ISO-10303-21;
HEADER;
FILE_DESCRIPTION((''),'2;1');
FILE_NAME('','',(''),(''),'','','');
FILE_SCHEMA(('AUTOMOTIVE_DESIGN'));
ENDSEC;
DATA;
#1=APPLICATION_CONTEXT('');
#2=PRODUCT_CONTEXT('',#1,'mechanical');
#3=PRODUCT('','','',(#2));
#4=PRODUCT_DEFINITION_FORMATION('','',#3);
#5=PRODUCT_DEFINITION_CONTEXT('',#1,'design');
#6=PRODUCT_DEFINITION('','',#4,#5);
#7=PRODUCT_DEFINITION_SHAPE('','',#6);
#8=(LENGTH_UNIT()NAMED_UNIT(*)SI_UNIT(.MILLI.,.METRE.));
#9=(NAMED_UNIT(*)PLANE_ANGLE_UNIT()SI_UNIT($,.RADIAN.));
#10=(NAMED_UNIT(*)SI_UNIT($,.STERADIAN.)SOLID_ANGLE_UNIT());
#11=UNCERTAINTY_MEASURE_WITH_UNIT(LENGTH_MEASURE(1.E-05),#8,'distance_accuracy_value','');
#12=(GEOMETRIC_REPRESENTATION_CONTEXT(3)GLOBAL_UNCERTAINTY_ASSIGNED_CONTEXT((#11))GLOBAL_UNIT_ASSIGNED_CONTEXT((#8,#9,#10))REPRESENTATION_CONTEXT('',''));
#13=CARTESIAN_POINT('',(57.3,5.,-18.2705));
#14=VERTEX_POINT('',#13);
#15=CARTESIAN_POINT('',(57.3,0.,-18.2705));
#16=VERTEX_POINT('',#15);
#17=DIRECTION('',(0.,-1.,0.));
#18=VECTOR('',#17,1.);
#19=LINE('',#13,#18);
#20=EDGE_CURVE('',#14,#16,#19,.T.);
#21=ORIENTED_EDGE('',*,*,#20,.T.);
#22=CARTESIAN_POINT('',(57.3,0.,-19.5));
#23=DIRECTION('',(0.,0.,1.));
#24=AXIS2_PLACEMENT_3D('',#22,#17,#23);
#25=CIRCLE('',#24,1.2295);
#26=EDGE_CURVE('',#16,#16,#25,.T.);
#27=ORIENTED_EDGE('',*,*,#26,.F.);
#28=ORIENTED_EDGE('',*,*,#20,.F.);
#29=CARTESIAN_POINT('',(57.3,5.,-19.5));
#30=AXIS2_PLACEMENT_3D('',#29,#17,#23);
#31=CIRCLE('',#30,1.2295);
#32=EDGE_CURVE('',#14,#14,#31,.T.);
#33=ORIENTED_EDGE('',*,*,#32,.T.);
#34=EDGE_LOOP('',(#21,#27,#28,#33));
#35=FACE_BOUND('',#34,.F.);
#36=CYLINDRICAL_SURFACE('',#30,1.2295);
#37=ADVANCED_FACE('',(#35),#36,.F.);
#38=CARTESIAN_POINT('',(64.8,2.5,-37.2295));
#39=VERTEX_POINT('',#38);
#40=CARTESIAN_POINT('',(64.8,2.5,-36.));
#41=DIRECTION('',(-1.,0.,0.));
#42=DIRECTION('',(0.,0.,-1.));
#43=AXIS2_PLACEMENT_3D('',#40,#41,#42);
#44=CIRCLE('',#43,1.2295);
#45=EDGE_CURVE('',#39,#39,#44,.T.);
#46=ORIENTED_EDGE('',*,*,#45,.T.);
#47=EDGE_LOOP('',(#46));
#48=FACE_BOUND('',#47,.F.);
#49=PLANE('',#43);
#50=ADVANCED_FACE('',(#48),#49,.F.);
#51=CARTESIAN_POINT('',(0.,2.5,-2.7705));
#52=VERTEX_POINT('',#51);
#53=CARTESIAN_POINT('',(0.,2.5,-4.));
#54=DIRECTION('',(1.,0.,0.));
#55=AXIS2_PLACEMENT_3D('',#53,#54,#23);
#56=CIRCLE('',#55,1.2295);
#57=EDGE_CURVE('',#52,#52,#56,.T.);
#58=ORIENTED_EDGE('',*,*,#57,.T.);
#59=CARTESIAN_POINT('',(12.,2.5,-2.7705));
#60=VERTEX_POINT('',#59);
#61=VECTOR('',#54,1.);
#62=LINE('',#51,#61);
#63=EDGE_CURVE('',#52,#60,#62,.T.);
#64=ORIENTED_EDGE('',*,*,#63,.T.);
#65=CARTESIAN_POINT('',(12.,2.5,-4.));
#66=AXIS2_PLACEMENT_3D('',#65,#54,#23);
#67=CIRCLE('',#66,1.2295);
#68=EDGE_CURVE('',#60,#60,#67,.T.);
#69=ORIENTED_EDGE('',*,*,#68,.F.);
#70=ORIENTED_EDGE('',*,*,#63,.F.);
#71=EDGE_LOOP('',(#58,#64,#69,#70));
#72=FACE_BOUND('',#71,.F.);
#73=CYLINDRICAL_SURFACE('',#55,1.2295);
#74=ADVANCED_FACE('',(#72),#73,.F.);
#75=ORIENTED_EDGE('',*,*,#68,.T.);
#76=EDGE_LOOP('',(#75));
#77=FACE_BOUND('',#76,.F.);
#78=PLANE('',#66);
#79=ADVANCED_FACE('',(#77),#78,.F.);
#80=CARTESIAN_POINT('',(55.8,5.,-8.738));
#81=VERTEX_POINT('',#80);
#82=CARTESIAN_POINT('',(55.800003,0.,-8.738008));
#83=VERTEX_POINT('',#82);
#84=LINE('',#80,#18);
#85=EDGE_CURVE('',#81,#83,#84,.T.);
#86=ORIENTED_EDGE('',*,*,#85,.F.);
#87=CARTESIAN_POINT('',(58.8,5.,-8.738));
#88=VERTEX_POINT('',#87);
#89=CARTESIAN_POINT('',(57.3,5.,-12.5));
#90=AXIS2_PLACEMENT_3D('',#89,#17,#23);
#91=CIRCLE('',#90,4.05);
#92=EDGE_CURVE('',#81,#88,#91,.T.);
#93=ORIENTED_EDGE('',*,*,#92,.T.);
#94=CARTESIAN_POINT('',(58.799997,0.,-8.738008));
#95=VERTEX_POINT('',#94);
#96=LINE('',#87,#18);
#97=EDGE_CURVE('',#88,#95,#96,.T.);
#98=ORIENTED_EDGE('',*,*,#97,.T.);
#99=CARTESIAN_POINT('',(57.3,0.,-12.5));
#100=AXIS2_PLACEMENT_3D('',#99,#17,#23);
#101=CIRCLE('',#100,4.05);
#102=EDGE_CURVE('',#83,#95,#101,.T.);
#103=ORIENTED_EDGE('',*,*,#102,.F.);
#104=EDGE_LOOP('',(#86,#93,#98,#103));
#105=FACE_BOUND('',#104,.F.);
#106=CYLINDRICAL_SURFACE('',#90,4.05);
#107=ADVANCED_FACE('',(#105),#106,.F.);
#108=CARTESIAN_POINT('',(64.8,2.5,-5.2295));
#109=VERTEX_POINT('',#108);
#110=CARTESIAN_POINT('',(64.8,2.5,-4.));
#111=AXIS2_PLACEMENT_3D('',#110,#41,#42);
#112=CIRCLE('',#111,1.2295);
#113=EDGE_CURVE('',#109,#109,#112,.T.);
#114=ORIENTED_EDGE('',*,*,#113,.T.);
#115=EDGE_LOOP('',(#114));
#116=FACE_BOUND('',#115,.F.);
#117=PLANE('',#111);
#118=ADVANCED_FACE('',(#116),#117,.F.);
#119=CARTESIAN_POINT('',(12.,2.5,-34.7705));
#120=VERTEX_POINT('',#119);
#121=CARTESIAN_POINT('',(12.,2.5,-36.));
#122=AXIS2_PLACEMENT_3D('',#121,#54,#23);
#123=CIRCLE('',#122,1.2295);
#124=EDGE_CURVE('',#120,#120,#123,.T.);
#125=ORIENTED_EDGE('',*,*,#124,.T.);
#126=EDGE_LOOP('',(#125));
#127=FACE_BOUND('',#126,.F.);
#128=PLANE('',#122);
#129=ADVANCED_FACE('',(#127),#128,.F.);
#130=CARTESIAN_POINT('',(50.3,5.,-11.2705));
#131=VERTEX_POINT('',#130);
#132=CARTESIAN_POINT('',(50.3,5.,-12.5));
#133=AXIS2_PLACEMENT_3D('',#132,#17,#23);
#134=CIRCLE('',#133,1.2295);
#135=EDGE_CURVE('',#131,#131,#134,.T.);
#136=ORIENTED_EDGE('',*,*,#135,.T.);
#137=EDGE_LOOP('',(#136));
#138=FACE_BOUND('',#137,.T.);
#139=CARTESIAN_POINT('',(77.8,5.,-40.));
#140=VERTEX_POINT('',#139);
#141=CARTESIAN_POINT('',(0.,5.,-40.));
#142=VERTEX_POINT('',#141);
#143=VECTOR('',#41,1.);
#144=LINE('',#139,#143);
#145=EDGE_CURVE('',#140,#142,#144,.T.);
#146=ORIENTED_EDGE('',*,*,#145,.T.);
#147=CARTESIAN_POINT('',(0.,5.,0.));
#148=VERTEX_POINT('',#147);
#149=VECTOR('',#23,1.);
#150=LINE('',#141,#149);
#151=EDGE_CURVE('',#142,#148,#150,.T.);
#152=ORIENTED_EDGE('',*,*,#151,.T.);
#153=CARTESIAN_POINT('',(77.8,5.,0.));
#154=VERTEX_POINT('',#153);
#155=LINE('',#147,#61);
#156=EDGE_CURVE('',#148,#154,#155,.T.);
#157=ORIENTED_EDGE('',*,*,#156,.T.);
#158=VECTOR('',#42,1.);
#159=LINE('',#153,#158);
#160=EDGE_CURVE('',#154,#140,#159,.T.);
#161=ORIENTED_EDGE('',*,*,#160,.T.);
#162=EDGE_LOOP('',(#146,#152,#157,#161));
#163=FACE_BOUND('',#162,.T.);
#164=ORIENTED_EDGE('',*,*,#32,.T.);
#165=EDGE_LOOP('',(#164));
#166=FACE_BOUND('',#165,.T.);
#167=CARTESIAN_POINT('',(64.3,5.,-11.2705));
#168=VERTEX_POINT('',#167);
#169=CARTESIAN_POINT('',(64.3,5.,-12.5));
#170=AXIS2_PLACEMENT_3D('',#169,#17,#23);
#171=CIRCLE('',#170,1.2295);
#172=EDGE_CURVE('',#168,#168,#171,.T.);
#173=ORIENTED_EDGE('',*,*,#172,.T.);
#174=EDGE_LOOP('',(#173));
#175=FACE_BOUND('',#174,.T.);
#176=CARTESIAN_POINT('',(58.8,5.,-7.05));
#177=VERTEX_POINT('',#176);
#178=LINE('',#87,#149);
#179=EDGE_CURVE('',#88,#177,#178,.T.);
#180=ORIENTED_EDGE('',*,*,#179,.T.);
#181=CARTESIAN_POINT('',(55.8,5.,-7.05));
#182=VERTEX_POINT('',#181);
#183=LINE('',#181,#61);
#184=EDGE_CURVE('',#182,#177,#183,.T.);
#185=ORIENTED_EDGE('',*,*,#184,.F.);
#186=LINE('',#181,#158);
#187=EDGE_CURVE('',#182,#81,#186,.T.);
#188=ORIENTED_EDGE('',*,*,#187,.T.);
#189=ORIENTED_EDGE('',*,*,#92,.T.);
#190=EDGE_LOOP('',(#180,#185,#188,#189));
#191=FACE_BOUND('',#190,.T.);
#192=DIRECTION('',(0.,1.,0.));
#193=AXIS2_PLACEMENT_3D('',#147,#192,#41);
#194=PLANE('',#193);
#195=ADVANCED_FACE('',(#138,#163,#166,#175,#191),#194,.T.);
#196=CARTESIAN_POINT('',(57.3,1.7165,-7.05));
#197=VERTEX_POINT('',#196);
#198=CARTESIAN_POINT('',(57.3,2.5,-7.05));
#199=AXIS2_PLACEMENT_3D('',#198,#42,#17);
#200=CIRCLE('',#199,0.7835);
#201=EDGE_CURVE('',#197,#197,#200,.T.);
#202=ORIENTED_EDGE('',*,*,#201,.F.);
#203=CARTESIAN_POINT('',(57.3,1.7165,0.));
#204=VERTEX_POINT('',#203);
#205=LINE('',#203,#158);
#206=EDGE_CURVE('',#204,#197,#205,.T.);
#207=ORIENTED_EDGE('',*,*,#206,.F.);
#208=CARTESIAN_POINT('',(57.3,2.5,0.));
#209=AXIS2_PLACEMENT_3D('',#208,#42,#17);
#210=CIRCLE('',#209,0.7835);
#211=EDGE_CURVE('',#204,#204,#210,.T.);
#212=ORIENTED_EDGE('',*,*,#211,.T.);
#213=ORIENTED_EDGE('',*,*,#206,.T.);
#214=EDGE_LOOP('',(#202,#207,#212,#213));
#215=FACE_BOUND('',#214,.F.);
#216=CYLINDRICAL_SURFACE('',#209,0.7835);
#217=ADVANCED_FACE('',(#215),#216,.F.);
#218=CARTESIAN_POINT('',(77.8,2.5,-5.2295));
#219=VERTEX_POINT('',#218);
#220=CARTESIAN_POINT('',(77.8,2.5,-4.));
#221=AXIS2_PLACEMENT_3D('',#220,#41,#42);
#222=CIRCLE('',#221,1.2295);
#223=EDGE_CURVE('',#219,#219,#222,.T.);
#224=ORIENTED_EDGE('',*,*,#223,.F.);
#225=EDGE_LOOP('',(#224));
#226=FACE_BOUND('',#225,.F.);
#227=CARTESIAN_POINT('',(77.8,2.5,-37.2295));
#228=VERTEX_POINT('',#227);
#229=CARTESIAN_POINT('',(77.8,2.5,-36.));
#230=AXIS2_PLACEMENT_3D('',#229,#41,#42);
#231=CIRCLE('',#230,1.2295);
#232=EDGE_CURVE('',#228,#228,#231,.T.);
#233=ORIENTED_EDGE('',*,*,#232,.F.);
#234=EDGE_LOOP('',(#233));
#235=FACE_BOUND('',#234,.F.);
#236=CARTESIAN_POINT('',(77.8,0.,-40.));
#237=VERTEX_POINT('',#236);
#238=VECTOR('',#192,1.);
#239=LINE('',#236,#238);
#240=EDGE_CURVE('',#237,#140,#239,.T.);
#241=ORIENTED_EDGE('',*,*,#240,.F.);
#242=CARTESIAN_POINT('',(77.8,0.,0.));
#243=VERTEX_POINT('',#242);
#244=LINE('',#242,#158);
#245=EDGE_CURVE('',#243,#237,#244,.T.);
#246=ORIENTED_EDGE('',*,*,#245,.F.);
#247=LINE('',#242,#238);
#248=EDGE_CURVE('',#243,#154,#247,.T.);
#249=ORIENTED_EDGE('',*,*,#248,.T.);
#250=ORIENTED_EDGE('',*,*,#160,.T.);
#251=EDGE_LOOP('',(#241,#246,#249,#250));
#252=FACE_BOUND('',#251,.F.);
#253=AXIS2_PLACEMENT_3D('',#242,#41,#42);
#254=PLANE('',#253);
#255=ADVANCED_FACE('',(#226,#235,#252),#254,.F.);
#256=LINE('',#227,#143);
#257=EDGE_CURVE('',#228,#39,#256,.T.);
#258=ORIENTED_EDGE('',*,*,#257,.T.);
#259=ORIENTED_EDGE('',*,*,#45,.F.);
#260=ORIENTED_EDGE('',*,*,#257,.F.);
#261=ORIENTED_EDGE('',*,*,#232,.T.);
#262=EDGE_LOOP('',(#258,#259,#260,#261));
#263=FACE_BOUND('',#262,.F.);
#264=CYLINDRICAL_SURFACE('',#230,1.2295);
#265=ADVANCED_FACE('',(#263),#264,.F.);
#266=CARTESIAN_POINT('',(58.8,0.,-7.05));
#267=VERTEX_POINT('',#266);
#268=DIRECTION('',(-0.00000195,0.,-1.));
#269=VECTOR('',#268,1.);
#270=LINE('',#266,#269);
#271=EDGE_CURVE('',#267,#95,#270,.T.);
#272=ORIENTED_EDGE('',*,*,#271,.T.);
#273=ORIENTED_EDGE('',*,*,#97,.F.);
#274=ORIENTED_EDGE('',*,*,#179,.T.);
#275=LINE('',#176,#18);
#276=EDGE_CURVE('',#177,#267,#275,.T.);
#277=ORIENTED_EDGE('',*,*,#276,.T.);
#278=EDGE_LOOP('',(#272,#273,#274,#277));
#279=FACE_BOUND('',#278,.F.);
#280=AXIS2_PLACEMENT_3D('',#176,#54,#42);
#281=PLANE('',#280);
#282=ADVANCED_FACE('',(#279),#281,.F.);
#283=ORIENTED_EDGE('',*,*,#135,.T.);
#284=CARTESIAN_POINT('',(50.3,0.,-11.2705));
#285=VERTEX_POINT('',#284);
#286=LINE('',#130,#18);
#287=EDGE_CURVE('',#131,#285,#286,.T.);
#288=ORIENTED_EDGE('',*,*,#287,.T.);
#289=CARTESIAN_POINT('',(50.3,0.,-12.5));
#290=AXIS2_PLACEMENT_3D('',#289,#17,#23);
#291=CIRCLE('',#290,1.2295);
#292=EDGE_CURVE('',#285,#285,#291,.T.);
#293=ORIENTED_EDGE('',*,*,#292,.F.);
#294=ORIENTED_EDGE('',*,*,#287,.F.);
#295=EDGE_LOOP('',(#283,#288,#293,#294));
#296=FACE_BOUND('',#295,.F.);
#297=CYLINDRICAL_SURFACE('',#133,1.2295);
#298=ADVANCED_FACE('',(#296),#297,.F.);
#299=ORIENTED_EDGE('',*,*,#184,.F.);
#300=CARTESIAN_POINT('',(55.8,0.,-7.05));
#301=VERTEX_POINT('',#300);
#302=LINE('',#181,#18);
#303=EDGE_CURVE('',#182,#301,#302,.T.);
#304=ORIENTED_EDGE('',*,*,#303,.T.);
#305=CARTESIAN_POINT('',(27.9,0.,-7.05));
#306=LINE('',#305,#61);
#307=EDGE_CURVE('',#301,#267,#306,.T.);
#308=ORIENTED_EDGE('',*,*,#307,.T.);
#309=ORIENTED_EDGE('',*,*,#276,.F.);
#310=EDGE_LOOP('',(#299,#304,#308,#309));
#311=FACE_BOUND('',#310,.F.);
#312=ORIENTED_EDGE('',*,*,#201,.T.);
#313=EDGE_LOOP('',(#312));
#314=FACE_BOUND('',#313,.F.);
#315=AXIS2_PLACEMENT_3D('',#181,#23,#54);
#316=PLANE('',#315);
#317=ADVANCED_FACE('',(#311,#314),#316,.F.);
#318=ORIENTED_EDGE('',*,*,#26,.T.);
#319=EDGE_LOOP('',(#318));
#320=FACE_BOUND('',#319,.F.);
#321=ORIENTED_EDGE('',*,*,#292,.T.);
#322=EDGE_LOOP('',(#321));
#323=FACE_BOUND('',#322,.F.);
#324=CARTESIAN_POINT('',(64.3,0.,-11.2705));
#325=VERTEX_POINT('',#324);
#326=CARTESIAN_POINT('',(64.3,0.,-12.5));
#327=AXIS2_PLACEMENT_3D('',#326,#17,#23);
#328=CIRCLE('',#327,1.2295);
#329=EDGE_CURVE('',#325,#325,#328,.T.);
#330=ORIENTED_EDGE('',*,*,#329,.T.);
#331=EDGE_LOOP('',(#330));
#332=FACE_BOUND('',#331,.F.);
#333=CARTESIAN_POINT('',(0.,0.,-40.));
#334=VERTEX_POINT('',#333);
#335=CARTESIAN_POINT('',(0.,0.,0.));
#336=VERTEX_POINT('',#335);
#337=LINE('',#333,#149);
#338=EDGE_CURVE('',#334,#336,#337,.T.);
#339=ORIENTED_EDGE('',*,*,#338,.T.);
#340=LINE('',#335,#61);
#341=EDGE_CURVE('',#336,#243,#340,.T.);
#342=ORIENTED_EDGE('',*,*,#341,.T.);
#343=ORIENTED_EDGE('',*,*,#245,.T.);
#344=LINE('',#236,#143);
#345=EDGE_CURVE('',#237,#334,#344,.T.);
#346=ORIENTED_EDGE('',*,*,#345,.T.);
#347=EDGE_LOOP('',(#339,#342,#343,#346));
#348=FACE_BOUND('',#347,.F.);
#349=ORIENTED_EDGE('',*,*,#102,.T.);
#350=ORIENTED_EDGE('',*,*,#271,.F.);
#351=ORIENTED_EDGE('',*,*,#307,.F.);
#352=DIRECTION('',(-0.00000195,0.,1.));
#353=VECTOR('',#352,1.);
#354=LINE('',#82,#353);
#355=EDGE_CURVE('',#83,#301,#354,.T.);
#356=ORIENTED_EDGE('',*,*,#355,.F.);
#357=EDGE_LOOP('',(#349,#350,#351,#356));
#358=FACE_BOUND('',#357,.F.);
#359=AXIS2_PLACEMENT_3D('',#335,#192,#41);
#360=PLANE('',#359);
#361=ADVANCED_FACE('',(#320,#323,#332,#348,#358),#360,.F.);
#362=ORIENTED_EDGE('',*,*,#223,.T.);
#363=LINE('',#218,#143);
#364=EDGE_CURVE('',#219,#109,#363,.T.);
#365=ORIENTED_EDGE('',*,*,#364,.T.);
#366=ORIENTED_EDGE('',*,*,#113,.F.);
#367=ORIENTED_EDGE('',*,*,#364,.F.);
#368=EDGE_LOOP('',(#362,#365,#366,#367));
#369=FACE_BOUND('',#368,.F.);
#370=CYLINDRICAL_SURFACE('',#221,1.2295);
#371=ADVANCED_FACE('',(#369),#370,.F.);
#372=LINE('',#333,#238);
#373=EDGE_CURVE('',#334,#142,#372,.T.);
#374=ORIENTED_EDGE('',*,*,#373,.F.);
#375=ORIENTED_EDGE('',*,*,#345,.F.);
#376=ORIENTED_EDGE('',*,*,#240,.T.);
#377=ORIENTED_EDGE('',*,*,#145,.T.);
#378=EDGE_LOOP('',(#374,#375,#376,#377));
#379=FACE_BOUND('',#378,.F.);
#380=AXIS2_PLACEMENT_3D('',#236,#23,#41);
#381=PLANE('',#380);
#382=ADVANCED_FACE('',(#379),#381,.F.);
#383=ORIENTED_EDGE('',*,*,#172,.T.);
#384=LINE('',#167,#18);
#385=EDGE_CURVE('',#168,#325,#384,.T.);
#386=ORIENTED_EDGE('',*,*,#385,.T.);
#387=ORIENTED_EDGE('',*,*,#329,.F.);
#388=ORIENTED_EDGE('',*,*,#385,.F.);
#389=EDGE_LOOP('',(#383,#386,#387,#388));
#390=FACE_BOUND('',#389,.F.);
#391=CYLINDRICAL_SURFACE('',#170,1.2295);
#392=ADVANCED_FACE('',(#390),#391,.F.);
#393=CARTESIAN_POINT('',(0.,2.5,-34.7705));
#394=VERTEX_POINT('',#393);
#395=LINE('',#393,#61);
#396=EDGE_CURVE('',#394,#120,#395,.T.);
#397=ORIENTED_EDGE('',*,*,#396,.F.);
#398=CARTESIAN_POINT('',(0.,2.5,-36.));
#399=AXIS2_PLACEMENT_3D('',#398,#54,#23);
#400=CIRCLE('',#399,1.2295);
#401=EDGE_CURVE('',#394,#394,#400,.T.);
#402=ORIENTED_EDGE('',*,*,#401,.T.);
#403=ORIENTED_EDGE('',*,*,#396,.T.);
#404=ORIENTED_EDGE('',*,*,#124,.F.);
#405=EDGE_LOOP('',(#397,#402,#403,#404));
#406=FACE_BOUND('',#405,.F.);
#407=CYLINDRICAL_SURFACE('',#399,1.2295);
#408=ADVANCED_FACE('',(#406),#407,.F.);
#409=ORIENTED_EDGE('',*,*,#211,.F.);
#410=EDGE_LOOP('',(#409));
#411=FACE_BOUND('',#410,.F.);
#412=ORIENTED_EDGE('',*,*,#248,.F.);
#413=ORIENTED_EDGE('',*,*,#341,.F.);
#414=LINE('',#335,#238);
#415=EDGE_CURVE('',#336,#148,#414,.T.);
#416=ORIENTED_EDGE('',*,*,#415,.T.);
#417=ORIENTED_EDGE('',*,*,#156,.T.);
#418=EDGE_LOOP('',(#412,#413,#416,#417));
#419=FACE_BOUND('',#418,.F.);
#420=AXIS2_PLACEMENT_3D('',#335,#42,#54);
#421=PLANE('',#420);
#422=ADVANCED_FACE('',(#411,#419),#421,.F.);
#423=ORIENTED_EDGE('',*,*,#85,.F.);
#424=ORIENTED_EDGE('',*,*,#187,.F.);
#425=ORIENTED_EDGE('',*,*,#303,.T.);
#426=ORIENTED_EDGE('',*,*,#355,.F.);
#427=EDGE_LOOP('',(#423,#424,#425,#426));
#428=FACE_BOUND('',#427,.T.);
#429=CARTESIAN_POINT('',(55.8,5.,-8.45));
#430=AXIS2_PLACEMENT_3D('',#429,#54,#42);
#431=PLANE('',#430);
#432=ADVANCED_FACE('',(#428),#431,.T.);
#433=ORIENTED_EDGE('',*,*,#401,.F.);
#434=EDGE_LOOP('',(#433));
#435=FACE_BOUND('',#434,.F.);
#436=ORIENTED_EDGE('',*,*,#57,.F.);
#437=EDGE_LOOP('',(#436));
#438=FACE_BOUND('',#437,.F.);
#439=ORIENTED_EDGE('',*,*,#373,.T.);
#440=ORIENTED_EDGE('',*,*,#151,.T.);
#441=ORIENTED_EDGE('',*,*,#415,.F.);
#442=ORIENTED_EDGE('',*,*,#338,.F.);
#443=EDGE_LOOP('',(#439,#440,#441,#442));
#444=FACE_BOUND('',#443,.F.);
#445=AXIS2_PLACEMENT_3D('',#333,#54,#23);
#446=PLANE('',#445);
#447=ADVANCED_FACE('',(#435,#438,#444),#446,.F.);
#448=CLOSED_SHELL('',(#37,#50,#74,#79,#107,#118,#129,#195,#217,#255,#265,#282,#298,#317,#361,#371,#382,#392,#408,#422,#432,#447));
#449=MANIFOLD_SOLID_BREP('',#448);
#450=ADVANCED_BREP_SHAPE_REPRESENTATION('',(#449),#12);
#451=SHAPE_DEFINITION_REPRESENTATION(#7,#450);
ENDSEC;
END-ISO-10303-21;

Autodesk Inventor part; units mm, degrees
ref_plane "YZ Plane" through (0, 0, 0) normal (1, 0, 0) x (0, 1, 0)
ref_plane "XZ Plane" through (0, 0, 0) normal (0, 1, 0) x (-1, 0, 0)
ref_plane "XY Plane" through (0, 0, 0) normal (0, 0, 1) x (1, 0, 0)
sketch "スケッチ2" plane through (0, 0, 0) normal (0, 1, 0) x (-1, 0, 0)
  line L0 (0, 0) -> (-77.8, 0)
  line L1 (-77.8, 0) -> (-77.8, -40)
  line L2 (-77.8, -40) -> (0, -40)
  line L3 (0, -40) -> (0, 0)
  dimension "d0" = 77.8
  dimension "d1" = 40
extrude "押し出し1" add sketch "スケッチ2" along normal blind 5
sketch "スケッチ4" plane through (0, 0, -40) normal (-1, 0, 0) x (0, 0, 1)
  line L0 (0, 0) -> (0, 5) construction
  line L1 (0, 2.5) -> (40, 2.5) construction
  line L2 (40, 0) -> (40, 5) construction
  point P0 (4, 2.5)
  point P1 (36, 2.5)
  dimension "d4" = 4
  dimension "d5" = 4
hole "穴1" at (0, 2.5, -36) at (0, 2.5, -4) direction (1, 0, 0) diameter 2.459 depth 12 thread size "M3x0.5" class "6H" standard "ISO Metric profile"
sketch "スケッチ5" plane through (77.8, 0, 0) normal (1, 0, 0) x (0, 0, -1)
  line L0 (0, 0) -> (0, 5) construction
  line L1 (0, 2.5) -> (39.9198, 2.5) construction
  circle A0 centre (4, 2.5) radius 1.2295 construction
  circle A1 centre (36, 2.5) radius 1.2295 projected
  point P0 (4, 2.5)
  point P1 (36, 2.5)
hole "穴2" at (77.8, 2.5, -4) at (77.8, 2.5, -36) direction (-1, 0, 0) diameter 2.459 depth 13 thread size "M3x0.5" class "6H" standard "ISO Metric profile"
sketch "スケッチ6" plane through (0, 5, 0) normal (0, 1, 0) x (1, 0, 0)
  line L0 (77.8, 0) -> (77.8, 40) construction
  line L1 (0, 40) -> (0, 0) construction
  line L2 (0, 0) -> (77.8, 0) construction
  point P0 (57.3, 12.5)
  dimension "d20" = 20.5
  dimension "d21" = 12.5
hole "穴3" at (57.3, 5, -12.5) direction (0, -1, 0) diameter 8.1 end through all
sketch "スケッチ7" plane through (0, 5, 0) normal (0, 1, 0) x (1, 0, 0)
  line L0 (77.8, 0) -> (77.8, 40) construction
  line L1 (77.8, 28.3) -> (0, 28.3) construction
  line L2 (0, 40) -> (0, 0) construction
  circle A0 centre (57.3, 12.5) radius 4.05 construction
  point P0 (67.8, 28.3)
  point P1 (46.8, 28.3)
  dimension "d29" = 15.8
  dimension "d30" = 10.5
  dimension "d31" = 10.5
hole "穴4" [suppressed]
sketch "スケッチ11" plane through (0, 5, 0) normal (0, 1, 0) x (1, 0, 0)
  circle A0 centre (57.3, 12.5) radius 4.05 projected
  line L0 (55.8, 7.05) -> (58.8, 7.05)
  line L1 (58.8, 7.05) -> (58.8, 8.45)
  line L2 (58.8, 8.45) -> (55.8, 8.45)
  line L3 (55.8, 8.45) -> (55.8, 7.05)
  line L4 (55.8, 8.45) -> (55.8, 8.738)
  line L5 (58.8, 8.45) -> (58.8, 8.738)
  point P0 (0, 0)
  point P1 (57.3, 8.45)
  dimension "d68" = 1.4
  dimension "d69" = 3
extrude "押し出し3" cut sketch "スケッチ11" against normal through all contours A0 L2 L4 | L5 L2 A0 | L2 L1 L0 L3
sketch "スケッチ8" plane through (0, 5, 0) normal (0, 1, 0) x (1, 0, 0)
  arc A0 (58.8, 8.738) -> (55.8, 8.738) centre (57.3, 12.5) ccw construction
  circle A1 centre (57.3, 12.5) radius 7 construction
  point P0 (0, 0)
  point P1 (57.3, 19.5)
  point P2 (50.3, 12.5)
  point P3 (64.3, 12.5)
  dimension "d39" = 14
hole "穴5" at (57.3, 5, -19.5) at (50.3, 5, -12.5) at (64.3, 5, -12.5) direction (0, -1, 0) diameter 2.459 end through all thread size "M3x0.5" class "6H" standard "ISO Metric profile"
sketch "スケッチ9" plane through (0, 5, 0) normal (0, 1, 0) x (1, 0, 0)
  circle A0 centre (57.3, 12.5) radius 4.05 projected
  line L0 (57.3, 12.5) -> (45.9478, 12.5) construction
  line L1 (51.85, 14) -> (53.25, 14)
  line L2 (53.25, 14) -> (53.25, 11)
  line L3 (53.25, 11) -> (51.85, 11)
  line L4 (51.85, 11) -> (51.85, 14)
  line L5 (51.85, 14) -> (53.25, 11) construction
  line L6 (53.25, 14) -> (51.85, 11) construction
  line L7 (53.25, 11) -> (53.538, 11)
  line L8 (53.25, 14) -> (53.538, 14)
  point P0 (0, 0)
  point P1 (52.55, 12.5)
  point P2 (53.25, 12.5)
  dimension "d56" = 1.4
  dimension "d57" = 0
  dimension "d58" = 3
extrude "押し出し2" [suppressed]
sketch "スケッチ12" plane through (0, 5, 0) normal (0, 1, 0) x (1, 0, 0)
  arc A0 (58.8, 8.738) -> (55.8, 8.738) centre (57.3, 12.5) ccw projected
  point P0 (0, 0)
  point P1 (50.3, 12.5)
  point P2 (57.3, 5.5)
  point P3 (64.3, 12.5)
  point P4 (57.3, 19.5)
  dimension "d74" = 360
  dimension "d76" = 14
hole "穴7" [suppressed]
sketch "スケッチ13" plane through (0, 0, 0) normal (0, 0, 1) x (1, 0, 0)
  line L0 (58.8, 5) -> (55.8, 5) projected
  line L1 (77.8, 0) -> (77.8, 5) projected
  point P0 (0, 0)
  point P1 (57.3, 2.5)
  point P2 (57.3, 5)
  point P3 (77.8, 2.5)
hole "穴8" at (57.3, 2.5, 0) direction (0, 0, -1) diameter 1.567 depth 7.05 thread size "M2x0.4" class "6H" standard "ISO Metric profile"
properties part number "shoulder1_verticval_cover" material "アルミニウム 5052"
